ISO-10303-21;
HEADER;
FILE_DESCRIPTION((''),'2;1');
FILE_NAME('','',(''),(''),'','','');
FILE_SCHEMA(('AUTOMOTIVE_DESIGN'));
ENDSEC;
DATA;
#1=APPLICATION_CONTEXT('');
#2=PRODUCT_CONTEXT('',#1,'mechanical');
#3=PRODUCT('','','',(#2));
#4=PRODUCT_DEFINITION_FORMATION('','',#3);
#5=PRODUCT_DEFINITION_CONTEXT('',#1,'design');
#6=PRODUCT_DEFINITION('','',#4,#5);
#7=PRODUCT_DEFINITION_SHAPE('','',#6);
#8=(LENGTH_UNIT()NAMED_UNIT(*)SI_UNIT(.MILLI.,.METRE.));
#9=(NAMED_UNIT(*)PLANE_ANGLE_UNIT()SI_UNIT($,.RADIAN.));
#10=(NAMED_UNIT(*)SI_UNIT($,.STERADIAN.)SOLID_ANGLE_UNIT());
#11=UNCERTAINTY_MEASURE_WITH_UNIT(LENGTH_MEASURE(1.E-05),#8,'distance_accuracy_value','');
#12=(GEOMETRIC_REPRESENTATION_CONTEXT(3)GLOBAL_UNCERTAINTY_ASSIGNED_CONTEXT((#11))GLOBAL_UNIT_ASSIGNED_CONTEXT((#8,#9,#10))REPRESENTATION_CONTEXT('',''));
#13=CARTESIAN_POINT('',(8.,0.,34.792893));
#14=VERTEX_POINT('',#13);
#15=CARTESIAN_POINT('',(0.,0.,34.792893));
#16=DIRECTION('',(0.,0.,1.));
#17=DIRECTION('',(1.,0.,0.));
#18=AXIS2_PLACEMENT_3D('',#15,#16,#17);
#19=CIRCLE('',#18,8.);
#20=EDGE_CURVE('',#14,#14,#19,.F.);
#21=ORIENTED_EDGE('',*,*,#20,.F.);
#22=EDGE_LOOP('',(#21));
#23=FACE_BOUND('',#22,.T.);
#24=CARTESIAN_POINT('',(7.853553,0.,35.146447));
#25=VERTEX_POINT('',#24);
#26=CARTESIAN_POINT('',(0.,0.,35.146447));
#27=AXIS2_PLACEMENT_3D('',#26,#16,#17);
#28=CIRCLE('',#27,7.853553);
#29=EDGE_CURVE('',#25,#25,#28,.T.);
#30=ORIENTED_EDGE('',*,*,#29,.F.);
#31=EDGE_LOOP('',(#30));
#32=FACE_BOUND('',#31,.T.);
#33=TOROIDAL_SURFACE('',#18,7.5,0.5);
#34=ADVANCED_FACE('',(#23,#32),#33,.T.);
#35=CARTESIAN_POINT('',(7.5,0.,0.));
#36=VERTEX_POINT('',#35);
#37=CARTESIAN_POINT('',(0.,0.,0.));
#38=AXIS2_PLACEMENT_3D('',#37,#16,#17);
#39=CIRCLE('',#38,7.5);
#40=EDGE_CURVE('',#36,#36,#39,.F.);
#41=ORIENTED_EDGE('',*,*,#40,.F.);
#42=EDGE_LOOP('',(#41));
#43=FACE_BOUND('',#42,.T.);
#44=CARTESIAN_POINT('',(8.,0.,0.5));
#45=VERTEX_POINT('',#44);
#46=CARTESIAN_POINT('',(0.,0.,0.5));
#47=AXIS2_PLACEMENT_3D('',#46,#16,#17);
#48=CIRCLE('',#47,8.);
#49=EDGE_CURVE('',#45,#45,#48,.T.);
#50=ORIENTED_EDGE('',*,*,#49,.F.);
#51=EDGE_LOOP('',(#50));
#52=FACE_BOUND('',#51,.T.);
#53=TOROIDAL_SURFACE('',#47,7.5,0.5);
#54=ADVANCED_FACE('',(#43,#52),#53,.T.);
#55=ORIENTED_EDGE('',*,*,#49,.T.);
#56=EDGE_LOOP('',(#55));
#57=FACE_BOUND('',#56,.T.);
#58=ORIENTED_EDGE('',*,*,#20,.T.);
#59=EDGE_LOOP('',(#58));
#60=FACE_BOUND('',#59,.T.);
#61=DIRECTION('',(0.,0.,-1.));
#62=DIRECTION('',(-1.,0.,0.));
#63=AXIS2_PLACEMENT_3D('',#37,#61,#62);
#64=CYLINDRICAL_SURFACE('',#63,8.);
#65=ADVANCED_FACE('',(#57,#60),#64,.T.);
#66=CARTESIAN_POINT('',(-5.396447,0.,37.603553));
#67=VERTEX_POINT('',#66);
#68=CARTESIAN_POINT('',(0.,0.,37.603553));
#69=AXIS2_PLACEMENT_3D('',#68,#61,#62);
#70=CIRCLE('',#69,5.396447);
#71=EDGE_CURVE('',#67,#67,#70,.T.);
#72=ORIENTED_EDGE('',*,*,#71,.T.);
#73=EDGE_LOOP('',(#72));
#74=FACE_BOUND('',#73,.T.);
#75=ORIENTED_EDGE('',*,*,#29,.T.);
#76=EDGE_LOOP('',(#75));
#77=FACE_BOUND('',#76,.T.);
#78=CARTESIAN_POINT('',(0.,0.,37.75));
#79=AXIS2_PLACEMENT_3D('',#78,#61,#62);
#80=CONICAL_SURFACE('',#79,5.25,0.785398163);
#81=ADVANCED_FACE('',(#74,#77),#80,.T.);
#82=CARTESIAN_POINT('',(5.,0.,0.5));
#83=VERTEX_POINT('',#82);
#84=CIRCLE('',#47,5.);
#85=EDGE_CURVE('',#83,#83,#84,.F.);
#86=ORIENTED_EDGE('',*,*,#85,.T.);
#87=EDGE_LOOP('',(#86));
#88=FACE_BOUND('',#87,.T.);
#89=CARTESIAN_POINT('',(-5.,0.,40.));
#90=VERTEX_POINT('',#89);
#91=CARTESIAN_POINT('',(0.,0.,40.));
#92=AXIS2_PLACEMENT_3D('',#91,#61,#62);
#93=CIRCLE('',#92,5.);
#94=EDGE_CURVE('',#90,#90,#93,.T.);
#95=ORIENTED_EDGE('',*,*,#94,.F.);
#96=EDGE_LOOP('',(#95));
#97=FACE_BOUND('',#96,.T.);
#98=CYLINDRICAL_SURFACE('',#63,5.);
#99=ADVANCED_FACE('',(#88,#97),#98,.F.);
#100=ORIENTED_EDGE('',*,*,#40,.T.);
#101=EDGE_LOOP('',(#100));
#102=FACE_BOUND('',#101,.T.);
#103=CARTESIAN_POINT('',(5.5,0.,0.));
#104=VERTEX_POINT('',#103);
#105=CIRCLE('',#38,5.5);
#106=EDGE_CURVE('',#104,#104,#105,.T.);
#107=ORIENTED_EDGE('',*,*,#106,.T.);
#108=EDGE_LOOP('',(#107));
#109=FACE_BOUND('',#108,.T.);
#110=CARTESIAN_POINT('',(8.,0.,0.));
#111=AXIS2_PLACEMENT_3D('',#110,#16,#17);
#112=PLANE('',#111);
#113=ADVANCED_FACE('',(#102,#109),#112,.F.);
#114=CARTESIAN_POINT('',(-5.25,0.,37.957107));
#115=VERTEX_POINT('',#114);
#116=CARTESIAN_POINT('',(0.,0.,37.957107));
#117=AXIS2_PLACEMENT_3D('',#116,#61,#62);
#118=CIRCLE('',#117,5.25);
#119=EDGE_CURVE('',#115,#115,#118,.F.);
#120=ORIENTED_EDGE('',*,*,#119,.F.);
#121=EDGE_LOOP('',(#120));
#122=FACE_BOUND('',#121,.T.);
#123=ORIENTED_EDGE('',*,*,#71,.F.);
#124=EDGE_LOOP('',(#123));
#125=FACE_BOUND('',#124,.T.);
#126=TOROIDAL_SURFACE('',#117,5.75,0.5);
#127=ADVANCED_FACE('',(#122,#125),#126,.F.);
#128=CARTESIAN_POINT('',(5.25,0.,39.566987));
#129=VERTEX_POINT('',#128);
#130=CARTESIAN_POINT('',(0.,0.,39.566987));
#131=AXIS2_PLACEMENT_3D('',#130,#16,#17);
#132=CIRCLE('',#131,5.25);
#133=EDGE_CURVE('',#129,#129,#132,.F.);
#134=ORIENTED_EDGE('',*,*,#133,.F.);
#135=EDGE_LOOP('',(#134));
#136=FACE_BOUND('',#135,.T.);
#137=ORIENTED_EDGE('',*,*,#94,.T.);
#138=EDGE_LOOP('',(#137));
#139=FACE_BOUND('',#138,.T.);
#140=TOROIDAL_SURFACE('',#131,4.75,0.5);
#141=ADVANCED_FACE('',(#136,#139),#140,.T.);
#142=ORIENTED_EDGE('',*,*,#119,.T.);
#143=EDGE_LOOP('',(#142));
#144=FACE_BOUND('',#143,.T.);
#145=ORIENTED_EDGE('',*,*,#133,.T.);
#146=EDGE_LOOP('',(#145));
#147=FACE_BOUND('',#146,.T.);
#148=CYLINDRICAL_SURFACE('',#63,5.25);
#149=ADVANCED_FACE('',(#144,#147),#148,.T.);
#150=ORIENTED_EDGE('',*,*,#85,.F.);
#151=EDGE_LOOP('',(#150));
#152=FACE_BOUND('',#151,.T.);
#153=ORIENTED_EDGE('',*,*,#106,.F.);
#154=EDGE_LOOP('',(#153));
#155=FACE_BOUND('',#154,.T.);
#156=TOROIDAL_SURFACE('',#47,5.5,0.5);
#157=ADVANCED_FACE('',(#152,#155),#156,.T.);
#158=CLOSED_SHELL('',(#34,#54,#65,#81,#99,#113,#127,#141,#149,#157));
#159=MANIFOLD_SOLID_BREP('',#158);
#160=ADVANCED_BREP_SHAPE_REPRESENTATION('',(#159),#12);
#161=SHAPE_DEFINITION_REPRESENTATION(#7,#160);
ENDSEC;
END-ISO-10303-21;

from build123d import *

# Parameters (mm, degrees)
FILLET1_R = 0.5


with BuildPart() as part:
    # Sketch3 → Revolve2 (revolve)
    with BuildSketch(Plane(origin=(0, 0, 0), x_dir=(1, 0, 0), z_dir=(0, 1, 0)), mode=Mode.PRIVATE) as revolve2_sk:
        Polygon((8, 0), (8, -35), (5.25, -37.75), (5.25, -40), (5, -40), (5, 0), align=None)
    revolve(revolve2_sk.sketch.rotate(Axis((0, 0, 0), (0, 0, 1)), 180), axis=Axis((0, 0, 0), (0, 0, 1)))

    # Fillet1
    # the kernel refuses this fillet: 0.5 mm, written as the material it adds along each edge
    with BuildSketch(Plane(origin=(0, 0, 37.75), x_dir=(-1, 0, 0), z_dir=(0, 1, 0))) as fillet1_piece_1:
        with BuildLine():
            CenterArc((5.25 + FILLET1_R, FILLET1_R * 0.414213562373), FILLET1_R, 180, 45)
            Line((5.25, FILLET1_R * 0.414213562373), (5.25, 0))
            Line((5.25, 0), (5.25 + FILLET1_R * 0.292893218813, -FILLET1_R * 0.292893218813))
        make_face()
    revolve(axis=Axis((0, 0, 37.75), (0, 0, 1)))
    # the kernel refuses this fillet: 0.5 mm, written as the material it takes off along each edge
    with BuildSketch(Plane(origin=(0, 0, 0), x_dir=(-1, 0, 0), z_dir=(0, 1, 0))) as fillet1_2_piece_1:
        with BuildLine():
            CenterArc((8 - FILLET1_R, FILLET1_R), FILLET1_R, 270, 90)
            Line((8 - FILLET1_R, 0), (8, 0))
            Line((8, 0), (8, FILLET1_R))
        make_face()
    revolve(axis=Axis((0, 0, 0), (0, 0, 1)), mode=Mode.SUBTRACT)
    with BuildSketch(Plane(origin=(0, 0, 35), x_dir=(-1, 0, 0), z_dir=(0, 1, 0))) as fillet1_2_piece_2:
        with BuildLine():
            CenterArc((8 - FILLET1_R, -FILLET1_R * 0.414213562373), FILLET1_R, 0, 45)
            Line((8 - FILLET1_R * 0.292893218813, FILLET1_R * 0.292893218813), (8, 0))
            Line((8, 0), (8, -FILLET1_R * 0.414213562373))
        make_face()
    revolve(axis=Axis((0, 0, 35), (0, 0, 1)), mode=Mode.SUBTRACT)
    with BuildSketch(Plane(origin=(0, 0, 40), x_dir=(-1, 0, 0), z_dir=(0, 1, 0))) as fillet1_2_piece_3:
        with BuildLine():
            CenterArc((4.75, -0.433012702), FILLET1_R, 0, 60)
            Line((5.25, -0.433012702), (5.25, 0))
            Line((5.25, 0), (5, 0))
        make_face()
    revolve(axis=Axis((0, 0, 40), (0, 0, 1)), mode=Mode.SUBTRACT)
    with BuildSketch(Plane(origin=(0, 0, 0), x_dir=(-1, 0, 0), z_dir=(0, 1, 0))) as fillet1_2_piece_4:
        with BuildLine():
            CenterArc((5 + FILLET1_R, FILLET1_R), FILLET1_R, 180, 90)
            Line((5, FILLET1_R), (5, 0))
            Line((5, 0), (5 + FILLET1_R, 0))
        make_face()
    revolve(axis=Axis((0, 0, 0), (0, 0, 1)), mode=Mode.SUBTRACT)


solid = part.part
